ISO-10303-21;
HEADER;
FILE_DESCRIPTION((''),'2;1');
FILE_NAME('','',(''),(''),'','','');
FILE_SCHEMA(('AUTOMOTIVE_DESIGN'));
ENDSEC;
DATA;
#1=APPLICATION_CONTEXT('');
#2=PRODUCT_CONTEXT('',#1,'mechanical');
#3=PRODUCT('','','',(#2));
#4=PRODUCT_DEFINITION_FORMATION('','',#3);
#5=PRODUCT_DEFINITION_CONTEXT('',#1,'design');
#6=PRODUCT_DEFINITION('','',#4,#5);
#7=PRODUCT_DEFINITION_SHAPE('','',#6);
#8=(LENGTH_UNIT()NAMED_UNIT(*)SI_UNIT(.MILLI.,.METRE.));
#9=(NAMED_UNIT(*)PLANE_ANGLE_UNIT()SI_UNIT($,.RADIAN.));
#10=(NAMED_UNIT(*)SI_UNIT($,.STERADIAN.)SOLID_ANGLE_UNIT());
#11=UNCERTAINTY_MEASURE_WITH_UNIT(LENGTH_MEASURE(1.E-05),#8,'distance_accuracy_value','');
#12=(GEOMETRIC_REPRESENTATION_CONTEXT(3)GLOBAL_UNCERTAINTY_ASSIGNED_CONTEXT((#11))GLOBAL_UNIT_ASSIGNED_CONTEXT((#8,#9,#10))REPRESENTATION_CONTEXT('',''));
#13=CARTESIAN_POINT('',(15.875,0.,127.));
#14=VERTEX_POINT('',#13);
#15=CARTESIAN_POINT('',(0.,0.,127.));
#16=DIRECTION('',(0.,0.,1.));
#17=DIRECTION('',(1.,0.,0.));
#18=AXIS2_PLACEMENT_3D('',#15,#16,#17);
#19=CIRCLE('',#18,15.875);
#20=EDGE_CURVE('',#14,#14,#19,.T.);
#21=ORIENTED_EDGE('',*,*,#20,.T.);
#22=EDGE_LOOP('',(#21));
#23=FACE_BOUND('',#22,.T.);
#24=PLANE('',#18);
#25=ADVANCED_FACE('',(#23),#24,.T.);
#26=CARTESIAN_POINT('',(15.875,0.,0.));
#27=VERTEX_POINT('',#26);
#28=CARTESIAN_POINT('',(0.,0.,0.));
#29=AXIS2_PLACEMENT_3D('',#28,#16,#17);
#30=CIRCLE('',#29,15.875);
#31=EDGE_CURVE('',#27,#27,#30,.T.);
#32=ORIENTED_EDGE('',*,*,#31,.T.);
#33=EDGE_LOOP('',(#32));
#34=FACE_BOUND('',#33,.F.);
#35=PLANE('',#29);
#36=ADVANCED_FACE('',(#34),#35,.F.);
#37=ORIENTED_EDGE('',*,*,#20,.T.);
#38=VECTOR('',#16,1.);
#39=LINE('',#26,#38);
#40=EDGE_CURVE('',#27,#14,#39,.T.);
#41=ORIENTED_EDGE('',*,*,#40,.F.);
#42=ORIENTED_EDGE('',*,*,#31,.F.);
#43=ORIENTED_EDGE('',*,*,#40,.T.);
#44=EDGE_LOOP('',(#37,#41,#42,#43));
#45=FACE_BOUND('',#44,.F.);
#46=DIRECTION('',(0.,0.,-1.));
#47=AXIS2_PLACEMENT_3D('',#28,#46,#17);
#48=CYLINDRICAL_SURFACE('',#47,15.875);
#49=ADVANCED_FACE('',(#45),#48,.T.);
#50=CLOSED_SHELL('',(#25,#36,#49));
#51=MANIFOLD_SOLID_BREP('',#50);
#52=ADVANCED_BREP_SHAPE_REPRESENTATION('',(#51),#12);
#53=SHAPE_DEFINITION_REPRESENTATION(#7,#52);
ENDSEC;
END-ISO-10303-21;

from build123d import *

# Parameters (mm, degrees)
F0_R     = 15.875
F2_DEPTH = 127


# Not quite as in the source:
# - the program builds the solid bodies; features that only make, move or delete a surface that nothing else refers to are left out


with BuildPart() as f2:
    # F0 (on Top) → F2 (new body, through all)
    with BuildSketch(Plane.XY):
        Circle(F0_R)
    extrude(amount=F2_DEPTH)


solid = f2.part
